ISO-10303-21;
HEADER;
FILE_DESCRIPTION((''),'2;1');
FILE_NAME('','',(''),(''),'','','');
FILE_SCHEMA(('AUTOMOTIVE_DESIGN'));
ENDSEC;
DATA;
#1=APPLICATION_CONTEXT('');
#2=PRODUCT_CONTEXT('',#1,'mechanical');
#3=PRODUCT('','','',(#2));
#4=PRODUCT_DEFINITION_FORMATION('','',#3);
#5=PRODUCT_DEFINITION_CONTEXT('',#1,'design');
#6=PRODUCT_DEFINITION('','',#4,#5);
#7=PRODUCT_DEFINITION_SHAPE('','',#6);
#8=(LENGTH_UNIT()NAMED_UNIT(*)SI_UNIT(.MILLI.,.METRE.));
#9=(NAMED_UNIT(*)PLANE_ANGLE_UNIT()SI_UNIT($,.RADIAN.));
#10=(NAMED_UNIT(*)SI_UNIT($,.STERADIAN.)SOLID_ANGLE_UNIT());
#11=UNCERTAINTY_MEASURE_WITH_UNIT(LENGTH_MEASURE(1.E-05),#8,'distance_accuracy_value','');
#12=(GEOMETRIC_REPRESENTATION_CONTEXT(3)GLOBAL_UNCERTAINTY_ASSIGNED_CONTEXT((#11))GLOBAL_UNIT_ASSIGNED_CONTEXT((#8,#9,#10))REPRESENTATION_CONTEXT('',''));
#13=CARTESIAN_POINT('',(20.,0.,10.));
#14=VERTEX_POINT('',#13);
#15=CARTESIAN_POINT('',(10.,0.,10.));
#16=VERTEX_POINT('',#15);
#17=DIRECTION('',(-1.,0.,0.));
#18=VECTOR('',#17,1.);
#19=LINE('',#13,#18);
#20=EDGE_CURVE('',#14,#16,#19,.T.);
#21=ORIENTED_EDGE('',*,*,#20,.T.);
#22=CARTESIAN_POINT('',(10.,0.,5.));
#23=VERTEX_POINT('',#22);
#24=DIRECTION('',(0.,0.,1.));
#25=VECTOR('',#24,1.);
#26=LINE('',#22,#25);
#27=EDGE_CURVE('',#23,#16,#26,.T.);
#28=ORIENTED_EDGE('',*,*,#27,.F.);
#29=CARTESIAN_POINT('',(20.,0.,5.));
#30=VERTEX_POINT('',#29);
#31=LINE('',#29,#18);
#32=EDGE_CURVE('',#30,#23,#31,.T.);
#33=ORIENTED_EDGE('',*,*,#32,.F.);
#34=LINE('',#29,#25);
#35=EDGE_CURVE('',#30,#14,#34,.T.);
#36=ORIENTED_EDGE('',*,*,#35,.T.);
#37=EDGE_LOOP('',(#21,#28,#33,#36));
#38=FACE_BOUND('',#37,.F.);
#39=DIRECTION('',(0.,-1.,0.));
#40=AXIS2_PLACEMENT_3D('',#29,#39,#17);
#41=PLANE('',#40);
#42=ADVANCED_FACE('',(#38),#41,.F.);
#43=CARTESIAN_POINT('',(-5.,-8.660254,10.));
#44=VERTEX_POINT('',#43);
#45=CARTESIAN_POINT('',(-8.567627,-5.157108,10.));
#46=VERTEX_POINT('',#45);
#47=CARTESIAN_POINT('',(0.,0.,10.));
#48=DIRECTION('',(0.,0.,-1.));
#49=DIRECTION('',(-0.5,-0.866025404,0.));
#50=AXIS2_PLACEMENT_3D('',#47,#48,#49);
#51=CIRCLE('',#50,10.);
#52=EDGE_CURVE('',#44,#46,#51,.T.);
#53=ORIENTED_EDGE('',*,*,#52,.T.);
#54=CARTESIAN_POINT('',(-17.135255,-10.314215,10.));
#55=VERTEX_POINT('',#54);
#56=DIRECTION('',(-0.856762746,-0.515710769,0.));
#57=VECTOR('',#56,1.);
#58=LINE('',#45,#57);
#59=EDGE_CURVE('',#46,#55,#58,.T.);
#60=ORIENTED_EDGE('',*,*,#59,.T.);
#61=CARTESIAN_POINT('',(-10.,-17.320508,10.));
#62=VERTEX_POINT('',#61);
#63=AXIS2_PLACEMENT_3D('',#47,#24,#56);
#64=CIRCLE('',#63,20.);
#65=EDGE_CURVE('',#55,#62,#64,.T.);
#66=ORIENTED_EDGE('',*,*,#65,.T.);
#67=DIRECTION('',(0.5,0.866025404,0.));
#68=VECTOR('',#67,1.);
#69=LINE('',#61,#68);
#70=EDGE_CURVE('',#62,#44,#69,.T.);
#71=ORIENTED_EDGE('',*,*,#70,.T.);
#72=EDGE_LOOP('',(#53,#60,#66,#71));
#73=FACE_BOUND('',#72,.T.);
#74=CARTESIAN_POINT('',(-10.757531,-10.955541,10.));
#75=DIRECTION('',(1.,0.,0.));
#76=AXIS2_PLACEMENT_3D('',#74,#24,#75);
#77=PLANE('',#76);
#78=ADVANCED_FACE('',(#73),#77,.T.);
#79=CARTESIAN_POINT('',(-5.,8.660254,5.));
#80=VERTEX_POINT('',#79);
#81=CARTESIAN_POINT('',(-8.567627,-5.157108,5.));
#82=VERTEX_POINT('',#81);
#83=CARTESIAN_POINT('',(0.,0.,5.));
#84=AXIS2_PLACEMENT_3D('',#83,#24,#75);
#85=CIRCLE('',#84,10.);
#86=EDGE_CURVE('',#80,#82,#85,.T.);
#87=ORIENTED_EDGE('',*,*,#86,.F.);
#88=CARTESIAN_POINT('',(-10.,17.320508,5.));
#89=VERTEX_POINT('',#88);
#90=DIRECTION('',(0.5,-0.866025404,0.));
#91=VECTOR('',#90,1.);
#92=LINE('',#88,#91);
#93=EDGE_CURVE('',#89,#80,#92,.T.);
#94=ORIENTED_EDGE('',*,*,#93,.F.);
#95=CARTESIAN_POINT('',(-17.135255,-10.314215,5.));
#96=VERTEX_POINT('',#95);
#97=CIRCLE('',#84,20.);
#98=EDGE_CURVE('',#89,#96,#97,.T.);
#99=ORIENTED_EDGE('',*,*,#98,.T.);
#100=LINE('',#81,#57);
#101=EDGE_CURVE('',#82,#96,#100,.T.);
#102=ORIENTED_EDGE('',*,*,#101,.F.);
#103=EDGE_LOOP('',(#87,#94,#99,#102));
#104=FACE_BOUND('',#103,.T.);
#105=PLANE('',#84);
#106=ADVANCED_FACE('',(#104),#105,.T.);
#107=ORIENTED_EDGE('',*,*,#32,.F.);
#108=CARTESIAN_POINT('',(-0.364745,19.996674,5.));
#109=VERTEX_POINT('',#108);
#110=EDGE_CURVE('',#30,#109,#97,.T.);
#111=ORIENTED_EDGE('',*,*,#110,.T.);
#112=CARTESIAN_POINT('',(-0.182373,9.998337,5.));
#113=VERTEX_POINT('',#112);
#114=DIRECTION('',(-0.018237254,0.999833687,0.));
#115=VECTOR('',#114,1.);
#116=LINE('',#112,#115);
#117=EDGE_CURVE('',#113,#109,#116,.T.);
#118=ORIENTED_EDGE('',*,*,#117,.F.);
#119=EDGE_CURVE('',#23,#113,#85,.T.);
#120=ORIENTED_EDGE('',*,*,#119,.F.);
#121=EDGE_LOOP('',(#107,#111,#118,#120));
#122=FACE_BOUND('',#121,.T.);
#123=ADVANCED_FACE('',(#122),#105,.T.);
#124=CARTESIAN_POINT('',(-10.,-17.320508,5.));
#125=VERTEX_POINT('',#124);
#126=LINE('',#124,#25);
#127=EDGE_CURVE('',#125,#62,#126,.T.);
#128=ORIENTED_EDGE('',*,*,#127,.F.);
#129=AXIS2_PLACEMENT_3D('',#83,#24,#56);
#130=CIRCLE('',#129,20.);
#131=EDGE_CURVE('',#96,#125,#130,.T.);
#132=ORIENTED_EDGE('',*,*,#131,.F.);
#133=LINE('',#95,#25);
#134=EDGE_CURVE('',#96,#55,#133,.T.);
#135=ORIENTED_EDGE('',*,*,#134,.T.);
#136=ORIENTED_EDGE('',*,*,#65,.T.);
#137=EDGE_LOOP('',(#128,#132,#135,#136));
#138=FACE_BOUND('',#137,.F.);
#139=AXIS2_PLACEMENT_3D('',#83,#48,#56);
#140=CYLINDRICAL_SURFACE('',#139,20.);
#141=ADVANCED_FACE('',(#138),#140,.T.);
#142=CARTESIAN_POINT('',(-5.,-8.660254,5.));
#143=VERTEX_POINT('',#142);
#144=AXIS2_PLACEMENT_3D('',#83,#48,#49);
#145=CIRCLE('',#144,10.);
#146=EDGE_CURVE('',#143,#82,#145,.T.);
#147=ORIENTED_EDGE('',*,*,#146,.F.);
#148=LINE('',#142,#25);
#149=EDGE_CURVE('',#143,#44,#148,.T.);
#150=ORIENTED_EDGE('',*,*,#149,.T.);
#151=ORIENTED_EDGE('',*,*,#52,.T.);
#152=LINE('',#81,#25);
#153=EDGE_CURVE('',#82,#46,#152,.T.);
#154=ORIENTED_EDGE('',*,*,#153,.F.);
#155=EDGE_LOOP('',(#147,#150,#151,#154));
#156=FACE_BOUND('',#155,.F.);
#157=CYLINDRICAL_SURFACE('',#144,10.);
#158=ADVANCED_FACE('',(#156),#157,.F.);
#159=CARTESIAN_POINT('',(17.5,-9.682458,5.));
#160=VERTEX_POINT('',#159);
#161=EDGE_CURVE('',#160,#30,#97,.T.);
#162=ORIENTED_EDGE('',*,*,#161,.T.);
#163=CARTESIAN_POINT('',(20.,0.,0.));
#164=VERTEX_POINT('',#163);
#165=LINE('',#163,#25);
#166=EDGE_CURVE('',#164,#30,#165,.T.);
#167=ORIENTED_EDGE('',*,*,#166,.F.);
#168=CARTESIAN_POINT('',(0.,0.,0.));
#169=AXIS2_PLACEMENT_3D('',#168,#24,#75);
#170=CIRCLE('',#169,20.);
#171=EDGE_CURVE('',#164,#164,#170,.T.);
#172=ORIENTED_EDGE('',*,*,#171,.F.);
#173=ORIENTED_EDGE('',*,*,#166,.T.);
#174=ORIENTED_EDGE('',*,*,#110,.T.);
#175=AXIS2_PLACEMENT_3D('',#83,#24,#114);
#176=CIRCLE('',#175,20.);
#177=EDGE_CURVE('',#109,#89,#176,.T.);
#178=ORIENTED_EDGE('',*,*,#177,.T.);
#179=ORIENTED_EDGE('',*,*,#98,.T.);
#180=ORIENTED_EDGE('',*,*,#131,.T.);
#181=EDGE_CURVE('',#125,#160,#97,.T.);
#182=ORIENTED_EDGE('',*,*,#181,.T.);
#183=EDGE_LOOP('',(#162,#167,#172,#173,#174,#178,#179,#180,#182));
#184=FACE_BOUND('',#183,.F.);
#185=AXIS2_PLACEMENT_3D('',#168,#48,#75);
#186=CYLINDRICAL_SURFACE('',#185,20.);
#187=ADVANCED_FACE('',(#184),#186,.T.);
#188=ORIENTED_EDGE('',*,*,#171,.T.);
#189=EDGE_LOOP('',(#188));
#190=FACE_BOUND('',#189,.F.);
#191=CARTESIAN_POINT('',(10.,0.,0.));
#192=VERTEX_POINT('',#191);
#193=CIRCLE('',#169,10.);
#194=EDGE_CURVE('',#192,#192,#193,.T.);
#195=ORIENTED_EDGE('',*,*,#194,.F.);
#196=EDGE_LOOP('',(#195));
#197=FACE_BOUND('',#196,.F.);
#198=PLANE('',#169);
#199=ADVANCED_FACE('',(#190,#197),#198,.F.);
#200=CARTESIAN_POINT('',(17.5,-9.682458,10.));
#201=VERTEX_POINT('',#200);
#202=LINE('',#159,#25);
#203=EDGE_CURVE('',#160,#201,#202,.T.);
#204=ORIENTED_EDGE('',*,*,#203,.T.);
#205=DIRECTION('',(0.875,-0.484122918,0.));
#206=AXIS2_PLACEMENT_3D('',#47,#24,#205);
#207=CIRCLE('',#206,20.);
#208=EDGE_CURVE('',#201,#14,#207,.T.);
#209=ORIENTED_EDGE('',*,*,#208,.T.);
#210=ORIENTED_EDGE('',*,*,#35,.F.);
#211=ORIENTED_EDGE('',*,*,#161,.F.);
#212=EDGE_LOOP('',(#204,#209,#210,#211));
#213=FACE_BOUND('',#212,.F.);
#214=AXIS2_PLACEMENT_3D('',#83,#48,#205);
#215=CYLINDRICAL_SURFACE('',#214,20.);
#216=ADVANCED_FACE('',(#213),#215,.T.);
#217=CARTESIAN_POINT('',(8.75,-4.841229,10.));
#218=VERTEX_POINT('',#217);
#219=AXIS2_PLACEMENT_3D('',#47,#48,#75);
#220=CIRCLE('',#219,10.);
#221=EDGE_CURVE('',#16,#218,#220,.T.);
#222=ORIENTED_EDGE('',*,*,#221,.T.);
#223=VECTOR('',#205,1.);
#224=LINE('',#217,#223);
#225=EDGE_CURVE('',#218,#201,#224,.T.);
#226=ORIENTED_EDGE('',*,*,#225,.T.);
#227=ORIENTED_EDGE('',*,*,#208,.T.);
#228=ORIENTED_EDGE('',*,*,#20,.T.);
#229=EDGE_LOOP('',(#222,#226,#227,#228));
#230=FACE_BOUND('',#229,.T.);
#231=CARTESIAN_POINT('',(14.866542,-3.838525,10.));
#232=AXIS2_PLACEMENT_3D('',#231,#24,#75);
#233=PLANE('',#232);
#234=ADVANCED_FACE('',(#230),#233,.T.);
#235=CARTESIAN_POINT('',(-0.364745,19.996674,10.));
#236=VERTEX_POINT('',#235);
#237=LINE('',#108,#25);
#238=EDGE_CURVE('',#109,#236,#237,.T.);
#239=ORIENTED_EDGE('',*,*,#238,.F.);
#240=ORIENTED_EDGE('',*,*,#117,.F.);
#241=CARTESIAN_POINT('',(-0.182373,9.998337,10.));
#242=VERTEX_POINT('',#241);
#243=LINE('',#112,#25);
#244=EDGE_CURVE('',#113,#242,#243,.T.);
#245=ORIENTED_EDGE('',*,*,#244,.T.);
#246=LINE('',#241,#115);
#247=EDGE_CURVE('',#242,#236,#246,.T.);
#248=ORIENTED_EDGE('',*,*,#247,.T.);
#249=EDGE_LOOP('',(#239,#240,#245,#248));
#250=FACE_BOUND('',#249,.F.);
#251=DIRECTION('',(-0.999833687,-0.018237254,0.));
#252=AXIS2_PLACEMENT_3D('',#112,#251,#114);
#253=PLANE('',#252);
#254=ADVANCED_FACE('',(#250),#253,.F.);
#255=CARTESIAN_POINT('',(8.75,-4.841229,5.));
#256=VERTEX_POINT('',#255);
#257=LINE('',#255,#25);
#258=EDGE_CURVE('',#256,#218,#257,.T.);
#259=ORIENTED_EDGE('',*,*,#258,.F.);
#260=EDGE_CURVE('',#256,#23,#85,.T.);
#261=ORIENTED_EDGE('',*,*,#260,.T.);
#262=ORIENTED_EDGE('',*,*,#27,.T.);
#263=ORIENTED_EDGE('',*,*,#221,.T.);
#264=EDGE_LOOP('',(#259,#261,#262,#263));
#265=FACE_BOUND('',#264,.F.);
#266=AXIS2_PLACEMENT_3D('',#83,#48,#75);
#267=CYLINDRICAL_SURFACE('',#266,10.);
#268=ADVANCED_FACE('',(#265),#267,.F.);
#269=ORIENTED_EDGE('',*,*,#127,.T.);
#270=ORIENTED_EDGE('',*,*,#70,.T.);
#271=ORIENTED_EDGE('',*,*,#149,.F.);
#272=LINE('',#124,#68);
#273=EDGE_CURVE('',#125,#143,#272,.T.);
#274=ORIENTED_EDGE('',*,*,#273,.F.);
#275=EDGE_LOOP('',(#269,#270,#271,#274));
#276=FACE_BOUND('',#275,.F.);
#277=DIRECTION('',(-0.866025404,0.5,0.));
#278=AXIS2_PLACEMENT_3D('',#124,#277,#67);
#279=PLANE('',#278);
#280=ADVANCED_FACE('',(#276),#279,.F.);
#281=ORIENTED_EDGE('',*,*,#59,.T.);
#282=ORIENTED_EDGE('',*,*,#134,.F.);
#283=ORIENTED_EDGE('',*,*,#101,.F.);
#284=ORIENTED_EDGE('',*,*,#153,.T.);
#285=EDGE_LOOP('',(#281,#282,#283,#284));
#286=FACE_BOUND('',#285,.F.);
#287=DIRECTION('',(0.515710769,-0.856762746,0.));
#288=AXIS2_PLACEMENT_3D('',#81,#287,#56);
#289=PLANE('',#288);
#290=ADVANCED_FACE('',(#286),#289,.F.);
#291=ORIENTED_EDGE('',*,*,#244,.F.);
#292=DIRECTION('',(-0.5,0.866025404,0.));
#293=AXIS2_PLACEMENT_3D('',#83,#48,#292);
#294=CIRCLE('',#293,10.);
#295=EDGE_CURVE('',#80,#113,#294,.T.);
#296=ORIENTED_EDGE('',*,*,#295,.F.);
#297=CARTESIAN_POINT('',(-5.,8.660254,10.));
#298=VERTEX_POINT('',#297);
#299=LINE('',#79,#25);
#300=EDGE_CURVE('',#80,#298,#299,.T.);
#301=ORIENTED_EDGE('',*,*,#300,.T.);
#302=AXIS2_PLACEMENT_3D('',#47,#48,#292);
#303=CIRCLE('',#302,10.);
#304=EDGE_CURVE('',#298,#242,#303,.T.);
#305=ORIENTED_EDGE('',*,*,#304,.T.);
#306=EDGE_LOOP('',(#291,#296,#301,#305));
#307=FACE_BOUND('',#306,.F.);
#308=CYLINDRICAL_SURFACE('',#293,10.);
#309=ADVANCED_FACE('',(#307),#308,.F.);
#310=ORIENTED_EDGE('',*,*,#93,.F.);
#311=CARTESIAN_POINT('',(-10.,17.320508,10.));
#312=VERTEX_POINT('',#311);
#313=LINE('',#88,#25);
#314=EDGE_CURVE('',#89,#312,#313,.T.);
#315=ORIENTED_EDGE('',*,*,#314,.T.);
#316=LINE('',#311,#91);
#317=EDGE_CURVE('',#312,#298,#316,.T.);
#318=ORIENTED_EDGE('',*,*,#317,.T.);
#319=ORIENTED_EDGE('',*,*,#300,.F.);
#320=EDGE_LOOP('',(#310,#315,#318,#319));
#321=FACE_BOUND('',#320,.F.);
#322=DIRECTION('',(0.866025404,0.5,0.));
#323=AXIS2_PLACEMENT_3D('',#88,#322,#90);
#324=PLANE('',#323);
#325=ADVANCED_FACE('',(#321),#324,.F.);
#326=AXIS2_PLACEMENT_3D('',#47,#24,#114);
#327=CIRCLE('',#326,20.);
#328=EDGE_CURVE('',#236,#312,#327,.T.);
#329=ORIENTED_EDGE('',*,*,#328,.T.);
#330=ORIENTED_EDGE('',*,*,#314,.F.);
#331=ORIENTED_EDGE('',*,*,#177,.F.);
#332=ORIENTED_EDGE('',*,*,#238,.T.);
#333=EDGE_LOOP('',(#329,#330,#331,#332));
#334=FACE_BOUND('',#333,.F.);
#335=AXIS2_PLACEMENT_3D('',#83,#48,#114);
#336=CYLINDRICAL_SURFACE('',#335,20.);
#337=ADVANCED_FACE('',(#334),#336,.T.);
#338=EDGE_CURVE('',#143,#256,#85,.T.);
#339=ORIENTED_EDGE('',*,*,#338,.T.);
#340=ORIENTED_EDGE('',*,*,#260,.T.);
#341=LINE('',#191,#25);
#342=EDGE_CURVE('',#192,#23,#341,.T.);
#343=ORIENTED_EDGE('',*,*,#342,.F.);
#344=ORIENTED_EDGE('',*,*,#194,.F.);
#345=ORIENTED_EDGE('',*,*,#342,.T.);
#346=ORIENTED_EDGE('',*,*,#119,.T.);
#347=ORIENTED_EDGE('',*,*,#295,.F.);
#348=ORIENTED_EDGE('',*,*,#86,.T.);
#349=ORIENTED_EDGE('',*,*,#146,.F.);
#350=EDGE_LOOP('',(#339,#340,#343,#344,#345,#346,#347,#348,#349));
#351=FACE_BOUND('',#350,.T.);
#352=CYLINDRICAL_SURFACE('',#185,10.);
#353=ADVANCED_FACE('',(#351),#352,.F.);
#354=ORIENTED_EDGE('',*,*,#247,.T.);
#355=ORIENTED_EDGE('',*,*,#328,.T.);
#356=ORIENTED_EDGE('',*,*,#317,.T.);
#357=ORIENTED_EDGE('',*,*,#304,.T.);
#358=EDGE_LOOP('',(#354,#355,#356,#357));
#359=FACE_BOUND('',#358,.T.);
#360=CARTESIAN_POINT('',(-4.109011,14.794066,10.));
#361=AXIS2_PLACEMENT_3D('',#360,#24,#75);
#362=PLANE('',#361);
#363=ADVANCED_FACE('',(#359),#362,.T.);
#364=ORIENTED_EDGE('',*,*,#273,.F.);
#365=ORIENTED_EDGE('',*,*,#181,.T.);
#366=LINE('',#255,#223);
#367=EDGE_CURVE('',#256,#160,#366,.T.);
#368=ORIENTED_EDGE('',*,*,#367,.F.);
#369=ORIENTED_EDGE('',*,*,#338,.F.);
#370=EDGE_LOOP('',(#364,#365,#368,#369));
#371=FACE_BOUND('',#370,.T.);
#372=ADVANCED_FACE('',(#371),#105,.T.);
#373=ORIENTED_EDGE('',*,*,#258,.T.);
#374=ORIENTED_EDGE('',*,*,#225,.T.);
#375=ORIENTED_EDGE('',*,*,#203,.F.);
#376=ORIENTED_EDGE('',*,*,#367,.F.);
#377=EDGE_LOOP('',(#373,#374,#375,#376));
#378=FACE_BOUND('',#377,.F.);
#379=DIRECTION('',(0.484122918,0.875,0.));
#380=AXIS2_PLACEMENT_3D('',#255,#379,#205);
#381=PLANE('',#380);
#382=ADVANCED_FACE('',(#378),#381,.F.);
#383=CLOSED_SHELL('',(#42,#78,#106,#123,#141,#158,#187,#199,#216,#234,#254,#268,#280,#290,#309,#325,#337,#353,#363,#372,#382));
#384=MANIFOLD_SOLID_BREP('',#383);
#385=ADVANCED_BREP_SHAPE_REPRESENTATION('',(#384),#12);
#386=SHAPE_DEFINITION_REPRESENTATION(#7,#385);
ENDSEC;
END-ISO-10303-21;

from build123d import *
from build123d import SkipClean  # not in build123d's __all__

# Parameters (mm, degrees)
F0_R     = 20
F0_R_2   = 10
F1_DEPTH = 5
F3_DEPTH = 5


with BuildPart() as f1:
    # F0 (on Top) → F1 (new body)
    with BuildSketch(Plane.XY):
        Circle(F0_R)
        Circle(F0_R_2, mode=Mode.SUBTRACT)
    extrude(amount=F1_DEPTH)

    # F2 (on face) → F3 (join)
    with BuildSketch(Plane.XY.offset(5)):
        with BuildLine():
            ThreePointArc((-5, -8.6602540378), (-7.0062926922, -7.1352549156), (-8.5676274578, -5.1571076917))
            Line((-8.5676274578, -5.1571076917), (-17.1352549156, -10.3142153835))
            ThreePointArc((-17.1352549156, -10.3142153835), (-14.0125853844, -14.2705098312), (-10, -17.3205080757))
            Line((-10, -17.3205080757), (-5, -8.6602540378))
        make_face()
        with BuildLine():
            ThreePointArc((10, 0), (9.6824583655, -2.5), (8.75, -4.8412291828))
            Line((8.75, -4.8412291828), (17.5, -9.6824583655))
            ThreePointArc((17.5, -9.6824583655), (19.364916731, -5), (20, 0))
            Line((20, 0), (10, 0))
        make_face()
        with BuildLine():
            ThreePointArc((-5, 8.6602540378), (-2.6761656733, 9.6352549156), (-0.1823725422, 9.9983368745))
            Line((-0.1823725422, 9.9983368745), (-0.3647450844, 19.996673749))
            ThreePointArc((-0.3647450844, 19.996673749), (-5.3523313466, 19.2705098312), (-10, 17.3205080757))
            Line((-10, 17.3205080757), (-5, 8.6602540378))
        make_face()
    with SkipClean():  # cleaning this boolean's faces spoils the solid; the shape is the same uncleaned
        extrude(amount=F3_DEPTH)


solid = f1.part
